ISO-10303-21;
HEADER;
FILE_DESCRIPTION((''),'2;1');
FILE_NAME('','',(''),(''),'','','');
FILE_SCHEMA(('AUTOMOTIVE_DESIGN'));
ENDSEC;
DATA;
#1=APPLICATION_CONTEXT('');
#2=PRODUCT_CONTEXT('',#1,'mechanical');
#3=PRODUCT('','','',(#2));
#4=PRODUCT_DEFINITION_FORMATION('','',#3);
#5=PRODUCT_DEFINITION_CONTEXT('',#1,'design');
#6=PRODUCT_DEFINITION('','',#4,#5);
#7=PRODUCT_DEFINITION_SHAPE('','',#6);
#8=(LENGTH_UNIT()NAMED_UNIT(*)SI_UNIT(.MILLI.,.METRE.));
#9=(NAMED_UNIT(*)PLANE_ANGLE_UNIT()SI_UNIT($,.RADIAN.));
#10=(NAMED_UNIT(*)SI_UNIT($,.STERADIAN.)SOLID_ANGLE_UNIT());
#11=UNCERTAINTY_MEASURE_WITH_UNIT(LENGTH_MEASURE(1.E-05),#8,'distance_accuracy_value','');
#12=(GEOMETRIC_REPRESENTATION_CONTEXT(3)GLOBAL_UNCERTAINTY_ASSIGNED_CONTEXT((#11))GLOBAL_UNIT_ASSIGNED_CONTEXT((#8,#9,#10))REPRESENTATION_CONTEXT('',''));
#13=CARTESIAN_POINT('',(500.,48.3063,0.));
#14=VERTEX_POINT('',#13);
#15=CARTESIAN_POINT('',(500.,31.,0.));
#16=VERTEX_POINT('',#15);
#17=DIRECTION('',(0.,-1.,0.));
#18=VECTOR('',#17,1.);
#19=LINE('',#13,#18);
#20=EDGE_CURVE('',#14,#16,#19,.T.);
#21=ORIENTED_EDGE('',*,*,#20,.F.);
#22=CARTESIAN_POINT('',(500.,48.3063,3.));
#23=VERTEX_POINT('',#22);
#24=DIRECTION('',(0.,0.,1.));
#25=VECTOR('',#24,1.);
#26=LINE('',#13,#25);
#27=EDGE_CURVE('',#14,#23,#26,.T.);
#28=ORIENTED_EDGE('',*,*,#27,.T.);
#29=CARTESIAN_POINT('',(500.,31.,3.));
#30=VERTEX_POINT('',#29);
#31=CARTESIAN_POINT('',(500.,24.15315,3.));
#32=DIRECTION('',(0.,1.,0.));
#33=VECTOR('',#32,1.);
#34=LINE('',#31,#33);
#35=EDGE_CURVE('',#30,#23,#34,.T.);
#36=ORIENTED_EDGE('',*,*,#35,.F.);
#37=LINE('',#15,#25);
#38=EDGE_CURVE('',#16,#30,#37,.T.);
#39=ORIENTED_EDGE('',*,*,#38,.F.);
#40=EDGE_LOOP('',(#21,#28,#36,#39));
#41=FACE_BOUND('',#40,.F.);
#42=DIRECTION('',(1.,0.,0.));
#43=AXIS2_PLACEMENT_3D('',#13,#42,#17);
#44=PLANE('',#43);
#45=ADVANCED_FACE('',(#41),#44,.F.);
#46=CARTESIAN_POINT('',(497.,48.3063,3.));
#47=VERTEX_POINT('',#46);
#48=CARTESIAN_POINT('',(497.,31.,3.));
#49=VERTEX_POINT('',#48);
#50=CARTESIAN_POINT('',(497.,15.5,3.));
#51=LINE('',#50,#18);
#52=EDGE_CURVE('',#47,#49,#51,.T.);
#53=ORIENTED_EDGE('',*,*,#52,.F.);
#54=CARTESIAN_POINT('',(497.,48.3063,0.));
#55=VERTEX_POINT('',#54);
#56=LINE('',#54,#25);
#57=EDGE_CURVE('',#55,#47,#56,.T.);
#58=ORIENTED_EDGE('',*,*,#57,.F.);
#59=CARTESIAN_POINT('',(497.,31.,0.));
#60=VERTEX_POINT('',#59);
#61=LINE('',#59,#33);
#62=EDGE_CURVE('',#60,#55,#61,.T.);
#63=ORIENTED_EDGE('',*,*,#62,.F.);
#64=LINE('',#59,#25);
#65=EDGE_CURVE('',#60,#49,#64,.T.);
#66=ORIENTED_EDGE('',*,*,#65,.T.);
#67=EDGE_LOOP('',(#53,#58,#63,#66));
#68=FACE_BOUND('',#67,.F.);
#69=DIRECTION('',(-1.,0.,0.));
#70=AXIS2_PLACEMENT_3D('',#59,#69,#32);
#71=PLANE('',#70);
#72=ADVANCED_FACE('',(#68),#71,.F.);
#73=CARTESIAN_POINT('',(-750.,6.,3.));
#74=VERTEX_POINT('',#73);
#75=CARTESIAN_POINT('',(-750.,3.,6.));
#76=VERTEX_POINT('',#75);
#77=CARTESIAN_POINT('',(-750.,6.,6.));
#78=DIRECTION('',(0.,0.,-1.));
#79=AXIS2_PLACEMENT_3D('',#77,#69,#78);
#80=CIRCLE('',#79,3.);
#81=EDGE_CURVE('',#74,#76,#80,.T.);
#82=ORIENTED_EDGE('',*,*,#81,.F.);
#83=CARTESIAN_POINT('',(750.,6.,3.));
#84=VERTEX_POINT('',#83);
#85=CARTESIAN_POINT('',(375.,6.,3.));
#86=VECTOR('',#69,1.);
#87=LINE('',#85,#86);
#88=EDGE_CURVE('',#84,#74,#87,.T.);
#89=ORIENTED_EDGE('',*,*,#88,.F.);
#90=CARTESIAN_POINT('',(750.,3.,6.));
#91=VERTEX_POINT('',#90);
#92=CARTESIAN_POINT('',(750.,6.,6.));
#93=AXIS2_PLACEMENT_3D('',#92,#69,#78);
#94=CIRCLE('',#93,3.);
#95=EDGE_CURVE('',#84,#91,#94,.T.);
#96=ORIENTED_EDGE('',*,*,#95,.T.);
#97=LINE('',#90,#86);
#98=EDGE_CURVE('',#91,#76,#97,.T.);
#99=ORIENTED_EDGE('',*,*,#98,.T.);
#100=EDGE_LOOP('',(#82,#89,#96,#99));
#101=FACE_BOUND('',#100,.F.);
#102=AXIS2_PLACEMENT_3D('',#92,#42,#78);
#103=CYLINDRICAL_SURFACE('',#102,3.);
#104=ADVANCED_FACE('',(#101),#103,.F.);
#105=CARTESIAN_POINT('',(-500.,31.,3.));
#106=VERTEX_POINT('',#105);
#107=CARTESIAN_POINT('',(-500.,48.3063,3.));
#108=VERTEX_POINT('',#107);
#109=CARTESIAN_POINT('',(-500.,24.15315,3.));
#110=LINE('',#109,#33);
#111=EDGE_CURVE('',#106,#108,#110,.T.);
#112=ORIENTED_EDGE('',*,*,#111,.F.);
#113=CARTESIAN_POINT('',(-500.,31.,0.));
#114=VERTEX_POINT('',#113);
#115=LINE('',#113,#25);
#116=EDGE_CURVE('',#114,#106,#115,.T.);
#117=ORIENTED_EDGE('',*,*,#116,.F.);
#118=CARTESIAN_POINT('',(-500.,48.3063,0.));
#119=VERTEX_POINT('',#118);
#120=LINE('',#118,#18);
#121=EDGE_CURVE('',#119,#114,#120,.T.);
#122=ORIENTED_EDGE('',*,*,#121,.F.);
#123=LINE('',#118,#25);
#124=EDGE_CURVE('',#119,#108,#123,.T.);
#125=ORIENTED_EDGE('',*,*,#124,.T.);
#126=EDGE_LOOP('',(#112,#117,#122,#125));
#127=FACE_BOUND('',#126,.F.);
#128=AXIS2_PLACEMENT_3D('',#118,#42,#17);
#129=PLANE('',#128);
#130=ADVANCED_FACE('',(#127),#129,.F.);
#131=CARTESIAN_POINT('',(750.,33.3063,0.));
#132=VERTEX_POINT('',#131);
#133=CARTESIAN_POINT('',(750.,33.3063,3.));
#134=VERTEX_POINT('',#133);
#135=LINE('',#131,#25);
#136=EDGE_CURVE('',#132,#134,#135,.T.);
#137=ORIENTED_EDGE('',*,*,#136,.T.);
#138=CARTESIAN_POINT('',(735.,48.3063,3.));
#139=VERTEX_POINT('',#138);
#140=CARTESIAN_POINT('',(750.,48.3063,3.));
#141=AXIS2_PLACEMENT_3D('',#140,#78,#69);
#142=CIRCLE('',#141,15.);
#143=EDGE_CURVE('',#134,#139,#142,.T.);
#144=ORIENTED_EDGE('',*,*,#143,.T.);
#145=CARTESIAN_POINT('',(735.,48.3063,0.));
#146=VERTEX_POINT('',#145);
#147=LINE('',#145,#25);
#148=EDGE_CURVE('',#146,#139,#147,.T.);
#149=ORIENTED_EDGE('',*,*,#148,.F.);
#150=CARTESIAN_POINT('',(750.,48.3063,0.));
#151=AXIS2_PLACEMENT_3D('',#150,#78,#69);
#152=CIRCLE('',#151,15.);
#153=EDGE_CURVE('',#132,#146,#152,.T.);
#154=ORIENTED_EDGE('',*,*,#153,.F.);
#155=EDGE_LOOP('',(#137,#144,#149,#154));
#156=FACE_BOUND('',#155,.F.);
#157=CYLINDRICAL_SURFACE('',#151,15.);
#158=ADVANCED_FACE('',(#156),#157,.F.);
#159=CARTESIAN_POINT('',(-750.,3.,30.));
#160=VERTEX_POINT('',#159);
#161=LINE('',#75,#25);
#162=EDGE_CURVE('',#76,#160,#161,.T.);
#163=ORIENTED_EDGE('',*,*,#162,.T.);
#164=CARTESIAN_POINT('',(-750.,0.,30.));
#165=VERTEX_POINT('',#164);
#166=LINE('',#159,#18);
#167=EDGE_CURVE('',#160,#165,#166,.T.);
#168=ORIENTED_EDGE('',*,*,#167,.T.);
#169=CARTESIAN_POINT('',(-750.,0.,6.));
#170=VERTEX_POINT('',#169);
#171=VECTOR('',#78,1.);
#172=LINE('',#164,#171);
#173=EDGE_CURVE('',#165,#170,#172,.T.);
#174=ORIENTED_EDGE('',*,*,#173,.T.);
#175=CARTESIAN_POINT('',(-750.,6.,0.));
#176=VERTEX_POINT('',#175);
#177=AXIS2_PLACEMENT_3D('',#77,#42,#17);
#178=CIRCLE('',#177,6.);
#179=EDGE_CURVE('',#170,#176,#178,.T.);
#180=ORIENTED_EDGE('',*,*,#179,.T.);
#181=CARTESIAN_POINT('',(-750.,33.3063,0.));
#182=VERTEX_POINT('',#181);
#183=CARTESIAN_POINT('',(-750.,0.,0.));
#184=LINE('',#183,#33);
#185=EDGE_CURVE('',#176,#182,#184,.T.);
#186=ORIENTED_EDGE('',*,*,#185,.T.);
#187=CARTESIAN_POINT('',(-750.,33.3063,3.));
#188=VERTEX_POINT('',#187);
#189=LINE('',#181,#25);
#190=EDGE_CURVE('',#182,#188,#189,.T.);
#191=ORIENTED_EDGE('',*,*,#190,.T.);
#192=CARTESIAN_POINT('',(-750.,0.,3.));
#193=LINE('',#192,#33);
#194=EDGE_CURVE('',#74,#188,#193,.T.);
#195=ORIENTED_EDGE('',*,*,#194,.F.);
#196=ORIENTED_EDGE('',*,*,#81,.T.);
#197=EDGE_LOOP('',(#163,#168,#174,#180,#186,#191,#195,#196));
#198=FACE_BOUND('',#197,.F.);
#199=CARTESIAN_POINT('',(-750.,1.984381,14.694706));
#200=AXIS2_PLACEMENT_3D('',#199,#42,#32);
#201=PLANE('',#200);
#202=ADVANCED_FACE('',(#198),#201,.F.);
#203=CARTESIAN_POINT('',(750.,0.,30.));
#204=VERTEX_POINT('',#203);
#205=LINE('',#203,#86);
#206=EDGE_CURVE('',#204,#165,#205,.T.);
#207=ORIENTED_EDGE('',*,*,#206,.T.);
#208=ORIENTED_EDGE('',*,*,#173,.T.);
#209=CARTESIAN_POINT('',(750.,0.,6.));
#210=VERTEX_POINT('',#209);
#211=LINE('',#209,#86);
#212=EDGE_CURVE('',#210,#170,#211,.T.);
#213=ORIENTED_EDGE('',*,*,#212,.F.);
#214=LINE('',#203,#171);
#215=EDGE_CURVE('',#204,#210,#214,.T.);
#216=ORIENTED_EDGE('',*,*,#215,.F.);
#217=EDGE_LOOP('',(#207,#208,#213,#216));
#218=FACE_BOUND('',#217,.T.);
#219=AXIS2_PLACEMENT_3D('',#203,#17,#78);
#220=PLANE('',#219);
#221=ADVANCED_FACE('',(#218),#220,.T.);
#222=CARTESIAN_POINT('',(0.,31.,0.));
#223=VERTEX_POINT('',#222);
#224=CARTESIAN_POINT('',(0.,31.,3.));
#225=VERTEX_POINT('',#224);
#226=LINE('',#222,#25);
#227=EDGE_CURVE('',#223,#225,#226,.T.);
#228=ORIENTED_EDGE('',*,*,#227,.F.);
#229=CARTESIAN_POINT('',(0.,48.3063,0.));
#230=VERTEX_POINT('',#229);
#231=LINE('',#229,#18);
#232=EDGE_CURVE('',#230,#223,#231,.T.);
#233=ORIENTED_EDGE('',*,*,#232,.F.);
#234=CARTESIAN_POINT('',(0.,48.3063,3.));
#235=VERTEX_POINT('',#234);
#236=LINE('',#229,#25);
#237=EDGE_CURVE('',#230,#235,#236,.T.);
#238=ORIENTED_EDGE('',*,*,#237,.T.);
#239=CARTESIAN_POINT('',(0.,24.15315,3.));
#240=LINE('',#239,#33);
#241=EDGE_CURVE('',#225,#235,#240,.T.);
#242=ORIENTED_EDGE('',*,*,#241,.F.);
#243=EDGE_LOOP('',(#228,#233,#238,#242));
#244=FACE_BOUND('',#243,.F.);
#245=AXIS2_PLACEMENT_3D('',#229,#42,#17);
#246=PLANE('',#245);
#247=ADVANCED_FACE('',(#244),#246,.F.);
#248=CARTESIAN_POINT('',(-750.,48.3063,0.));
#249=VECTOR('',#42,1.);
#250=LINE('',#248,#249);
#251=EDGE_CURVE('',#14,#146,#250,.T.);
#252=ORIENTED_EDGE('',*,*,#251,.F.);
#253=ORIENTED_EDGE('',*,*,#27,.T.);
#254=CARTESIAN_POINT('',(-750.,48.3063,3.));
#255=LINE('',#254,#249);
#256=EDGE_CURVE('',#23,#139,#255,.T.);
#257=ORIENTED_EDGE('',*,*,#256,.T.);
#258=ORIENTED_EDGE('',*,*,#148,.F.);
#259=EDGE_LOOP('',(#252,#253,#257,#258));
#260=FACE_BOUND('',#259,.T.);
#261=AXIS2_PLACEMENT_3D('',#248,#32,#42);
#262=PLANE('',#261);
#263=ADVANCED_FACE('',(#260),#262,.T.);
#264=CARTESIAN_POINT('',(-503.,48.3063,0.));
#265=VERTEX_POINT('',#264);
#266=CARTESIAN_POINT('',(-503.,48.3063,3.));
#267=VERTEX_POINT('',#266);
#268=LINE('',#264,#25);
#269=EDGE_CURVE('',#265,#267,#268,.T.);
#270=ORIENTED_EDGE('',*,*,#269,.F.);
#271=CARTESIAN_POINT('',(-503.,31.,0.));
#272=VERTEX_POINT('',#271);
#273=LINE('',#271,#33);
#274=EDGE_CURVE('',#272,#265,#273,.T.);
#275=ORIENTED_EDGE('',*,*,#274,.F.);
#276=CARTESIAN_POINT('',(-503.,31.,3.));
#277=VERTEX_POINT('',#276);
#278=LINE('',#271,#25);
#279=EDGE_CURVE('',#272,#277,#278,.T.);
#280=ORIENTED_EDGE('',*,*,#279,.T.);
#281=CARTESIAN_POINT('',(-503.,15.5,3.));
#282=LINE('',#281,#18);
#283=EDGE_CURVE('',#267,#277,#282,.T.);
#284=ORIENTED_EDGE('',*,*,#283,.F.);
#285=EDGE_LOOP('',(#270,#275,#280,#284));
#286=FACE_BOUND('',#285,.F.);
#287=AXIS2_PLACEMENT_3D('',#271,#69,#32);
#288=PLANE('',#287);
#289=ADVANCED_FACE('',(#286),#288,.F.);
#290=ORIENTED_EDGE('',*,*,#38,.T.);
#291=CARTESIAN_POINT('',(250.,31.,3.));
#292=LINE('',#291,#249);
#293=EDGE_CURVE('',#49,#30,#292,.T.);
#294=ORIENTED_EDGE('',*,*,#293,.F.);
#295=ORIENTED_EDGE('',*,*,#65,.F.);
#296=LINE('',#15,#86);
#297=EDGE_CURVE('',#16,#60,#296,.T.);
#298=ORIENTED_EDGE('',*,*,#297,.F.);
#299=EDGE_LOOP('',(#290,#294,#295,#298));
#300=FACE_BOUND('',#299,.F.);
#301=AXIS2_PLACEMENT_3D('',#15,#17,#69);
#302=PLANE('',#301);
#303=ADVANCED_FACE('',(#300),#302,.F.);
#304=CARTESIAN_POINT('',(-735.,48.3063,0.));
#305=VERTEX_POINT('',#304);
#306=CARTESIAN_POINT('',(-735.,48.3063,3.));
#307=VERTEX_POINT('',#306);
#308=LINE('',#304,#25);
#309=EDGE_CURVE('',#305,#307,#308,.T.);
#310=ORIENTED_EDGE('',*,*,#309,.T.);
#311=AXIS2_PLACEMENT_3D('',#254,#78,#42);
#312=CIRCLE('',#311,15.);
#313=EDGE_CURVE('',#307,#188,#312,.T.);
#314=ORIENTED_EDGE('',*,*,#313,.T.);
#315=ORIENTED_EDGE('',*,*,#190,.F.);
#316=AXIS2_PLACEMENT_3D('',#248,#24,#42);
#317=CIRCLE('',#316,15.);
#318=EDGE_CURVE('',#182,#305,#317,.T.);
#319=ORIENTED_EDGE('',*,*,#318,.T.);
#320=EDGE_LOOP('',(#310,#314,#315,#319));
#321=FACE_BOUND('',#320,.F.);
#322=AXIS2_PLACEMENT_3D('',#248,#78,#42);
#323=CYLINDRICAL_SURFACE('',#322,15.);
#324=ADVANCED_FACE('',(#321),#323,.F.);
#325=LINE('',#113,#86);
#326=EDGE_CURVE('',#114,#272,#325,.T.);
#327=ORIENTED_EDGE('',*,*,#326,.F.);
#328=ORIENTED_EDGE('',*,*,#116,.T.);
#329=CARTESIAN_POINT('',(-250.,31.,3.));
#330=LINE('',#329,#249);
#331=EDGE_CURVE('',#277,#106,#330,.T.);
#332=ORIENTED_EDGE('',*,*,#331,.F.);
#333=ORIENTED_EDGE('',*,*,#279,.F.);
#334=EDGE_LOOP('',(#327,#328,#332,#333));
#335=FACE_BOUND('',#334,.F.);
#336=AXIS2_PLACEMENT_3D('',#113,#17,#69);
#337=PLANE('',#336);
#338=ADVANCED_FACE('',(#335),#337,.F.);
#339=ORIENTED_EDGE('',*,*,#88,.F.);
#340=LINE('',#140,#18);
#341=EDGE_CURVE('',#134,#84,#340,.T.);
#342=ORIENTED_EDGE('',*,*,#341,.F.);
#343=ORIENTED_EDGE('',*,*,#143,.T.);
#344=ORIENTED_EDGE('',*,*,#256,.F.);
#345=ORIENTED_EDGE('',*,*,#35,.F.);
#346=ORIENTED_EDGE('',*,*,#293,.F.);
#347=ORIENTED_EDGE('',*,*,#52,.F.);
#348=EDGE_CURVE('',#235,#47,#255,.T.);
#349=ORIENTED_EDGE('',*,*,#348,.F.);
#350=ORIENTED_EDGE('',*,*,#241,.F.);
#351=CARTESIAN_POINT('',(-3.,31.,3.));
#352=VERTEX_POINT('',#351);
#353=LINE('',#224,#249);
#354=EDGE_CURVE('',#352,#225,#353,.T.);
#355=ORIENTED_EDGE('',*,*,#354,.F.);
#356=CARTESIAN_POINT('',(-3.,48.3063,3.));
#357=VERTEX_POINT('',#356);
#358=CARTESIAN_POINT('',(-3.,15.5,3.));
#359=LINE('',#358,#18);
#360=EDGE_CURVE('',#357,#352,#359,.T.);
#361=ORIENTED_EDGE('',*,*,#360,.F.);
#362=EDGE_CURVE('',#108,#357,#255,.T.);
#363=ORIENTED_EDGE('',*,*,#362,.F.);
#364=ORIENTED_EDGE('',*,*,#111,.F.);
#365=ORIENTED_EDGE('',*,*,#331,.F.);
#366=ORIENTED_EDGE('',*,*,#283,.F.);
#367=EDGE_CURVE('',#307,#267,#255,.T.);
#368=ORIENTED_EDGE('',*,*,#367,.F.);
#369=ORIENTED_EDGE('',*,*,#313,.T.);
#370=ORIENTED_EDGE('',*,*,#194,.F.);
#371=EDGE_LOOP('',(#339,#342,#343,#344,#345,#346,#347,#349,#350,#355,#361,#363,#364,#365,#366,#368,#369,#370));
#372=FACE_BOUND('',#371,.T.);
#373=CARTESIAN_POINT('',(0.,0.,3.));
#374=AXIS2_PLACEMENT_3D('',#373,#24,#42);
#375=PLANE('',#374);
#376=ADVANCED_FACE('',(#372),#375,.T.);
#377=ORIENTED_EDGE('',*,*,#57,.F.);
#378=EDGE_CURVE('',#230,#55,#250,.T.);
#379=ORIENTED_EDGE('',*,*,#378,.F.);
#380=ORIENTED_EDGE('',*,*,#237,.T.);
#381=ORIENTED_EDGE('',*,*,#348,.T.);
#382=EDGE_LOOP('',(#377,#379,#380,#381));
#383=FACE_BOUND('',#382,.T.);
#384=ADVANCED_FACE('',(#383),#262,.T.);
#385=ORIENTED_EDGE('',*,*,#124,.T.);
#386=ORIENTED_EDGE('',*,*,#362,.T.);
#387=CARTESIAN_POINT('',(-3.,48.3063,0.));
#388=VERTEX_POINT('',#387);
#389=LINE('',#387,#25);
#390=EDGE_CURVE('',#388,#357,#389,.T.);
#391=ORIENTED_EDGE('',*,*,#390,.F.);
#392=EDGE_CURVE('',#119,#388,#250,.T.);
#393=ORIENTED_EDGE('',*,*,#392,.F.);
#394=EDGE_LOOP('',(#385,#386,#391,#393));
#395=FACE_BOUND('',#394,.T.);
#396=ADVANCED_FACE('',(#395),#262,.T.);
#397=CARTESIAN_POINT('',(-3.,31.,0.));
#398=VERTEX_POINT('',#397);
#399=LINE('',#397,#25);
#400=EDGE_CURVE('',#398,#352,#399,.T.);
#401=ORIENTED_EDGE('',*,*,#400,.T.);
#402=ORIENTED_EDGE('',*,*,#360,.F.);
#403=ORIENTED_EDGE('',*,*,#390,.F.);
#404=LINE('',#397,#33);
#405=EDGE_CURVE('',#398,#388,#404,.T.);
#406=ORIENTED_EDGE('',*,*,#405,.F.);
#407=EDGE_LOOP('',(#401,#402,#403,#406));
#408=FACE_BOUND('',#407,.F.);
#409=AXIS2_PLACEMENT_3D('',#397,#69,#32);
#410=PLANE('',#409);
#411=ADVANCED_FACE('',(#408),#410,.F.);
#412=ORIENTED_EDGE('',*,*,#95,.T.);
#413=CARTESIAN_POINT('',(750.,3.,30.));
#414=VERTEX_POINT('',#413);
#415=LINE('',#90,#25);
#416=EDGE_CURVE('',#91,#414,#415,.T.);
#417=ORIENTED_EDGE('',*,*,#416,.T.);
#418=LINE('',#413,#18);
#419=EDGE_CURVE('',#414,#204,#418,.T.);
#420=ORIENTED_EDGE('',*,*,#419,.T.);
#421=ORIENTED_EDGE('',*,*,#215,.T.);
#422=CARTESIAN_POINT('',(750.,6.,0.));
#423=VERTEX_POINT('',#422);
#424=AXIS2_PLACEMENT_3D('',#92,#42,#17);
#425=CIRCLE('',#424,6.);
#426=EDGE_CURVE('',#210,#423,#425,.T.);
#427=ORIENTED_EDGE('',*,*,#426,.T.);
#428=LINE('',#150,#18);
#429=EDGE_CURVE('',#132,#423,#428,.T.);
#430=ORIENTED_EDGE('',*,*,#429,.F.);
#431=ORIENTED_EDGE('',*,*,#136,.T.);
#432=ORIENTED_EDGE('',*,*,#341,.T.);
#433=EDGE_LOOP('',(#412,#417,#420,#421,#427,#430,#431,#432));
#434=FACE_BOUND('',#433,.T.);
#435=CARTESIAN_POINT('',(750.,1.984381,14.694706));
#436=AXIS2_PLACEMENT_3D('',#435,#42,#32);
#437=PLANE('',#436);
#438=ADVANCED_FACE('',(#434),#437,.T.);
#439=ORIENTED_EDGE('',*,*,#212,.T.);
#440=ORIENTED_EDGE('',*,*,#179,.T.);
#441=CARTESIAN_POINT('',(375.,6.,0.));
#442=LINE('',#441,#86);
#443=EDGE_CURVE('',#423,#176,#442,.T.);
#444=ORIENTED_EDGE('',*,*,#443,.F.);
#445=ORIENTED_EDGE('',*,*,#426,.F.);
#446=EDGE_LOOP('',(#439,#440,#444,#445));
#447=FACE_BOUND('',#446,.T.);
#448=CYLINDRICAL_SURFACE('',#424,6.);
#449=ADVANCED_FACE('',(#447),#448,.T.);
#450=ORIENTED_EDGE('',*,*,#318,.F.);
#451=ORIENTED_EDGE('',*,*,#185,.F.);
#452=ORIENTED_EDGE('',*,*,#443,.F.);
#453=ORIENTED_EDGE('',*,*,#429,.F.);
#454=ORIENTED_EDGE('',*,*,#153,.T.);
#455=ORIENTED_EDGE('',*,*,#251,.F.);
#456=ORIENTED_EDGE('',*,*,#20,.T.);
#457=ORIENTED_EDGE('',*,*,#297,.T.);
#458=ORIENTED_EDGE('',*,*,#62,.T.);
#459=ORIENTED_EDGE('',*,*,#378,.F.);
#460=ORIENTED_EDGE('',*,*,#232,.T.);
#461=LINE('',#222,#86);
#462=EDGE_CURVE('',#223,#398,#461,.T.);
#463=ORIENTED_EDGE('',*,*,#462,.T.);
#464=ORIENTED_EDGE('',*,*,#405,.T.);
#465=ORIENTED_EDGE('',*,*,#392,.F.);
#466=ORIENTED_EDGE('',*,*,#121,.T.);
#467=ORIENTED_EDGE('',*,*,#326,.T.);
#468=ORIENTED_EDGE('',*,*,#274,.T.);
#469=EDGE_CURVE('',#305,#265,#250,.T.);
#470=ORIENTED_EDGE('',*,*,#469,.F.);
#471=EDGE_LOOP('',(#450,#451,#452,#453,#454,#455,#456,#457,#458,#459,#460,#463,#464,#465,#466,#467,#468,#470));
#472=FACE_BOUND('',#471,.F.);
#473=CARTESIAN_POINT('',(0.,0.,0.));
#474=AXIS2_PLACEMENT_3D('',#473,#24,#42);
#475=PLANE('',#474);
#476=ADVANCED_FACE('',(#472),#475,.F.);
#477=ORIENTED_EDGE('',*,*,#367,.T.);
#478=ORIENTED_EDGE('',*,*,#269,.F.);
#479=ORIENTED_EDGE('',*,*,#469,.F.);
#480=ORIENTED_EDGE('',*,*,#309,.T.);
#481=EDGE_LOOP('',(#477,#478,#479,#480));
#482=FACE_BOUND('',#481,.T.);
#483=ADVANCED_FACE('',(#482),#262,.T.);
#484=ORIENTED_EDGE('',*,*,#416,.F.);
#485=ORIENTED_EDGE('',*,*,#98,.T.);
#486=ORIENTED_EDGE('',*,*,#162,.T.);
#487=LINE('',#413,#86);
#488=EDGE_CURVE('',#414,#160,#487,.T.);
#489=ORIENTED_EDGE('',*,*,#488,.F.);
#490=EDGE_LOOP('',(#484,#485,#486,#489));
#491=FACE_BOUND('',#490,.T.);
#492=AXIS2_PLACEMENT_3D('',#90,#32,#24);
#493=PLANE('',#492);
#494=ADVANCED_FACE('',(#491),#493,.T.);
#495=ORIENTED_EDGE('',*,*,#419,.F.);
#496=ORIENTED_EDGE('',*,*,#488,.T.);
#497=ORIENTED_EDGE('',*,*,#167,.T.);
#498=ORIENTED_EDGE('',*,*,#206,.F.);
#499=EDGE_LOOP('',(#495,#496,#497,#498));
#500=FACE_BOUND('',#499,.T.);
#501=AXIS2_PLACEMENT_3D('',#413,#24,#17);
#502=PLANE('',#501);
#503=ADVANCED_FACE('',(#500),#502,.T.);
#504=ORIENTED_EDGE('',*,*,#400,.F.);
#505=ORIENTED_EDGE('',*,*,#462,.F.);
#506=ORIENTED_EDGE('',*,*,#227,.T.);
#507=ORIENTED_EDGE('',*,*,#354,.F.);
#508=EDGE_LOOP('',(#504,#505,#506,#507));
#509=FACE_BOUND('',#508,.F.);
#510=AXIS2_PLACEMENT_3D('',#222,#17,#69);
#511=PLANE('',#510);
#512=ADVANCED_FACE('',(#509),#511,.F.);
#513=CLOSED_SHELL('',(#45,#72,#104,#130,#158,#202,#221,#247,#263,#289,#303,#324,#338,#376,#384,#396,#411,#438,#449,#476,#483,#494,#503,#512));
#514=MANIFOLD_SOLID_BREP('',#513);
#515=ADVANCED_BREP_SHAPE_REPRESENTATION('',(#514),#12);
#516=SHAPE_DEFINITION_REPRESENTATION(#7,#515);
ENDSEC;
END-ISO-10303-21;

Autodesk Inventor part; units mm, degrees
ref_plane "YZ Plane" through (0, 0, 0) normal (1, 0, 0) x (0, 1, 0)
ref_plane "XZ Plane" through (0, 0, 0) normal (0, 1, 0) x (-1, 0, 0)
ref_plane "XY Plane" through (0, 0, 0) normal (0, 0, 1) x (1, 0, 0)
sketch "Sketch1" plane through (0, 0, 0) normal (0, 0, 1) x (1, 0, 0)
  line L0 (-750, 48.3063) -> (750, 48.3063)
  line L1 (750, 48.3063) -> (750, 0)
  line L2 (750, 0) -> (-750, 0)
  line L3 (-750, 0) -> (-750, 48.3063)
  point P0 (0, 0)
  point P1 (0, 0)
  dimension "d0" = 1500
  dimension "d1" = 48.3063
extrude "Plate1" add sketch "Sketch1" along normal blind 3
sketch "Sketch2" plane through (750, 3, 0) normal (0, -1, 0) x (1, 0, 0)
  line L0 (-1500, 0) -> (0, 0)
  line L1 (0, 0) -> (0, 30)
  line L2 (0, 30) -> (-1500, 30)
  line L3 (-1500, 30) -> (-1500, 0)
edge flange "Flange1" height 30 angle 90 thickness 3 bend radius 3 thickness toward (0, -1, 0) relief tear relief width 3 relief depth 1.5 edges at (0, 0, 3) wall of the first edge with corners at (-750, 3, 0) (750, 3, 0) (750, 3, 30) (-750, 3, 30)
bend "Bend1"
corner "Corner1"
sketch "Sketch5" plane through (0, 0, 0) normal (0, 0, -1) x (-1, 0, 0)
  line L0 (750, 48.3063) -> (-750, 48.3063) projected
  line L1 (500, 48.3063) -> (500, 31)
  line L2 (500, 31) -> (503, 31)
  line L3 (503, 31) -> (503, 48.3063)
  line L4 (750, 0) -> (-750, 0) projected
  point P0 (0, 0)
  dimension "d18" = 3
  dimension "d19" = 247
  dimension "d20" = 31
extrude "Extrusion1" cut sketch "Sketch5" against normal through all
pattern_linear "Rectangular Pattern1" count 3 spacing 500 along (1, 0, 0) of "Extrusion1"
sketch "Sketch6" plane through (0, 0, 0) normal (0, 0, -1) x (-1, 0, 0)
  line L0 (-750, 48.3063) -> (-750, 6) projected
  circle A0 centre (-750, 48.3063) radius 15
  line L1 (-750, 48.3063) -> (-500, 48.3063) projected
  point P0 (0, 0)
  point P1 (-735, 48.3063)
  point P2 (-750, 33.3063)
  dimension "d24" = 30
extrude "Extrusion2" cut sketch "Sketch6" against normal through all contours L1 A0 L0 picked at (-740.1254, 47.1937)
mirror "Mirror1" about plane through (0, 0, 0) normal (1, 0, 0) of "Extrusion2"
equation "\"d1\" = Стрингер_4"
equation "\"d18\" = Thickness"
equation "\"d2\" = Thickness"
equation "\"d3\" = BendReliefWidth"
equation "\"d4\" = BendReliefDepth"
equation "\"d5\" = MinimumRemnant"
equation "\"d6\" = TransitionRadius"
equation "\"d9\" = BendRadius"
equation "\"d10\" = CornerReliefSize"
equation "\"d11\" = GapSize"
equation "\"d12\" = JacobiRadiusSize"
equation "\"BendRadius\" = Thickness"
equation "\"BendReliefWidth\" = Thickness"
equation "\"BendReliefDepth\" = 0.5 * Thickness"
equation "\"CornerReliefSize\" = 4 * Thickness"
equation "\"MinimumRemnant\" = 2 * Thickness"
equation "\"TransitionRadius\" = BendRadius"
equation "\"JacobiRadiusSize\" = BendRadius"
equation "\"GapSize\" = Thickness"
equation "\"Стрингер_4\" = 48.306299"
equation "\"Thickness\" = 3"
properties part number "МОО 054 стрингер борт 41"
